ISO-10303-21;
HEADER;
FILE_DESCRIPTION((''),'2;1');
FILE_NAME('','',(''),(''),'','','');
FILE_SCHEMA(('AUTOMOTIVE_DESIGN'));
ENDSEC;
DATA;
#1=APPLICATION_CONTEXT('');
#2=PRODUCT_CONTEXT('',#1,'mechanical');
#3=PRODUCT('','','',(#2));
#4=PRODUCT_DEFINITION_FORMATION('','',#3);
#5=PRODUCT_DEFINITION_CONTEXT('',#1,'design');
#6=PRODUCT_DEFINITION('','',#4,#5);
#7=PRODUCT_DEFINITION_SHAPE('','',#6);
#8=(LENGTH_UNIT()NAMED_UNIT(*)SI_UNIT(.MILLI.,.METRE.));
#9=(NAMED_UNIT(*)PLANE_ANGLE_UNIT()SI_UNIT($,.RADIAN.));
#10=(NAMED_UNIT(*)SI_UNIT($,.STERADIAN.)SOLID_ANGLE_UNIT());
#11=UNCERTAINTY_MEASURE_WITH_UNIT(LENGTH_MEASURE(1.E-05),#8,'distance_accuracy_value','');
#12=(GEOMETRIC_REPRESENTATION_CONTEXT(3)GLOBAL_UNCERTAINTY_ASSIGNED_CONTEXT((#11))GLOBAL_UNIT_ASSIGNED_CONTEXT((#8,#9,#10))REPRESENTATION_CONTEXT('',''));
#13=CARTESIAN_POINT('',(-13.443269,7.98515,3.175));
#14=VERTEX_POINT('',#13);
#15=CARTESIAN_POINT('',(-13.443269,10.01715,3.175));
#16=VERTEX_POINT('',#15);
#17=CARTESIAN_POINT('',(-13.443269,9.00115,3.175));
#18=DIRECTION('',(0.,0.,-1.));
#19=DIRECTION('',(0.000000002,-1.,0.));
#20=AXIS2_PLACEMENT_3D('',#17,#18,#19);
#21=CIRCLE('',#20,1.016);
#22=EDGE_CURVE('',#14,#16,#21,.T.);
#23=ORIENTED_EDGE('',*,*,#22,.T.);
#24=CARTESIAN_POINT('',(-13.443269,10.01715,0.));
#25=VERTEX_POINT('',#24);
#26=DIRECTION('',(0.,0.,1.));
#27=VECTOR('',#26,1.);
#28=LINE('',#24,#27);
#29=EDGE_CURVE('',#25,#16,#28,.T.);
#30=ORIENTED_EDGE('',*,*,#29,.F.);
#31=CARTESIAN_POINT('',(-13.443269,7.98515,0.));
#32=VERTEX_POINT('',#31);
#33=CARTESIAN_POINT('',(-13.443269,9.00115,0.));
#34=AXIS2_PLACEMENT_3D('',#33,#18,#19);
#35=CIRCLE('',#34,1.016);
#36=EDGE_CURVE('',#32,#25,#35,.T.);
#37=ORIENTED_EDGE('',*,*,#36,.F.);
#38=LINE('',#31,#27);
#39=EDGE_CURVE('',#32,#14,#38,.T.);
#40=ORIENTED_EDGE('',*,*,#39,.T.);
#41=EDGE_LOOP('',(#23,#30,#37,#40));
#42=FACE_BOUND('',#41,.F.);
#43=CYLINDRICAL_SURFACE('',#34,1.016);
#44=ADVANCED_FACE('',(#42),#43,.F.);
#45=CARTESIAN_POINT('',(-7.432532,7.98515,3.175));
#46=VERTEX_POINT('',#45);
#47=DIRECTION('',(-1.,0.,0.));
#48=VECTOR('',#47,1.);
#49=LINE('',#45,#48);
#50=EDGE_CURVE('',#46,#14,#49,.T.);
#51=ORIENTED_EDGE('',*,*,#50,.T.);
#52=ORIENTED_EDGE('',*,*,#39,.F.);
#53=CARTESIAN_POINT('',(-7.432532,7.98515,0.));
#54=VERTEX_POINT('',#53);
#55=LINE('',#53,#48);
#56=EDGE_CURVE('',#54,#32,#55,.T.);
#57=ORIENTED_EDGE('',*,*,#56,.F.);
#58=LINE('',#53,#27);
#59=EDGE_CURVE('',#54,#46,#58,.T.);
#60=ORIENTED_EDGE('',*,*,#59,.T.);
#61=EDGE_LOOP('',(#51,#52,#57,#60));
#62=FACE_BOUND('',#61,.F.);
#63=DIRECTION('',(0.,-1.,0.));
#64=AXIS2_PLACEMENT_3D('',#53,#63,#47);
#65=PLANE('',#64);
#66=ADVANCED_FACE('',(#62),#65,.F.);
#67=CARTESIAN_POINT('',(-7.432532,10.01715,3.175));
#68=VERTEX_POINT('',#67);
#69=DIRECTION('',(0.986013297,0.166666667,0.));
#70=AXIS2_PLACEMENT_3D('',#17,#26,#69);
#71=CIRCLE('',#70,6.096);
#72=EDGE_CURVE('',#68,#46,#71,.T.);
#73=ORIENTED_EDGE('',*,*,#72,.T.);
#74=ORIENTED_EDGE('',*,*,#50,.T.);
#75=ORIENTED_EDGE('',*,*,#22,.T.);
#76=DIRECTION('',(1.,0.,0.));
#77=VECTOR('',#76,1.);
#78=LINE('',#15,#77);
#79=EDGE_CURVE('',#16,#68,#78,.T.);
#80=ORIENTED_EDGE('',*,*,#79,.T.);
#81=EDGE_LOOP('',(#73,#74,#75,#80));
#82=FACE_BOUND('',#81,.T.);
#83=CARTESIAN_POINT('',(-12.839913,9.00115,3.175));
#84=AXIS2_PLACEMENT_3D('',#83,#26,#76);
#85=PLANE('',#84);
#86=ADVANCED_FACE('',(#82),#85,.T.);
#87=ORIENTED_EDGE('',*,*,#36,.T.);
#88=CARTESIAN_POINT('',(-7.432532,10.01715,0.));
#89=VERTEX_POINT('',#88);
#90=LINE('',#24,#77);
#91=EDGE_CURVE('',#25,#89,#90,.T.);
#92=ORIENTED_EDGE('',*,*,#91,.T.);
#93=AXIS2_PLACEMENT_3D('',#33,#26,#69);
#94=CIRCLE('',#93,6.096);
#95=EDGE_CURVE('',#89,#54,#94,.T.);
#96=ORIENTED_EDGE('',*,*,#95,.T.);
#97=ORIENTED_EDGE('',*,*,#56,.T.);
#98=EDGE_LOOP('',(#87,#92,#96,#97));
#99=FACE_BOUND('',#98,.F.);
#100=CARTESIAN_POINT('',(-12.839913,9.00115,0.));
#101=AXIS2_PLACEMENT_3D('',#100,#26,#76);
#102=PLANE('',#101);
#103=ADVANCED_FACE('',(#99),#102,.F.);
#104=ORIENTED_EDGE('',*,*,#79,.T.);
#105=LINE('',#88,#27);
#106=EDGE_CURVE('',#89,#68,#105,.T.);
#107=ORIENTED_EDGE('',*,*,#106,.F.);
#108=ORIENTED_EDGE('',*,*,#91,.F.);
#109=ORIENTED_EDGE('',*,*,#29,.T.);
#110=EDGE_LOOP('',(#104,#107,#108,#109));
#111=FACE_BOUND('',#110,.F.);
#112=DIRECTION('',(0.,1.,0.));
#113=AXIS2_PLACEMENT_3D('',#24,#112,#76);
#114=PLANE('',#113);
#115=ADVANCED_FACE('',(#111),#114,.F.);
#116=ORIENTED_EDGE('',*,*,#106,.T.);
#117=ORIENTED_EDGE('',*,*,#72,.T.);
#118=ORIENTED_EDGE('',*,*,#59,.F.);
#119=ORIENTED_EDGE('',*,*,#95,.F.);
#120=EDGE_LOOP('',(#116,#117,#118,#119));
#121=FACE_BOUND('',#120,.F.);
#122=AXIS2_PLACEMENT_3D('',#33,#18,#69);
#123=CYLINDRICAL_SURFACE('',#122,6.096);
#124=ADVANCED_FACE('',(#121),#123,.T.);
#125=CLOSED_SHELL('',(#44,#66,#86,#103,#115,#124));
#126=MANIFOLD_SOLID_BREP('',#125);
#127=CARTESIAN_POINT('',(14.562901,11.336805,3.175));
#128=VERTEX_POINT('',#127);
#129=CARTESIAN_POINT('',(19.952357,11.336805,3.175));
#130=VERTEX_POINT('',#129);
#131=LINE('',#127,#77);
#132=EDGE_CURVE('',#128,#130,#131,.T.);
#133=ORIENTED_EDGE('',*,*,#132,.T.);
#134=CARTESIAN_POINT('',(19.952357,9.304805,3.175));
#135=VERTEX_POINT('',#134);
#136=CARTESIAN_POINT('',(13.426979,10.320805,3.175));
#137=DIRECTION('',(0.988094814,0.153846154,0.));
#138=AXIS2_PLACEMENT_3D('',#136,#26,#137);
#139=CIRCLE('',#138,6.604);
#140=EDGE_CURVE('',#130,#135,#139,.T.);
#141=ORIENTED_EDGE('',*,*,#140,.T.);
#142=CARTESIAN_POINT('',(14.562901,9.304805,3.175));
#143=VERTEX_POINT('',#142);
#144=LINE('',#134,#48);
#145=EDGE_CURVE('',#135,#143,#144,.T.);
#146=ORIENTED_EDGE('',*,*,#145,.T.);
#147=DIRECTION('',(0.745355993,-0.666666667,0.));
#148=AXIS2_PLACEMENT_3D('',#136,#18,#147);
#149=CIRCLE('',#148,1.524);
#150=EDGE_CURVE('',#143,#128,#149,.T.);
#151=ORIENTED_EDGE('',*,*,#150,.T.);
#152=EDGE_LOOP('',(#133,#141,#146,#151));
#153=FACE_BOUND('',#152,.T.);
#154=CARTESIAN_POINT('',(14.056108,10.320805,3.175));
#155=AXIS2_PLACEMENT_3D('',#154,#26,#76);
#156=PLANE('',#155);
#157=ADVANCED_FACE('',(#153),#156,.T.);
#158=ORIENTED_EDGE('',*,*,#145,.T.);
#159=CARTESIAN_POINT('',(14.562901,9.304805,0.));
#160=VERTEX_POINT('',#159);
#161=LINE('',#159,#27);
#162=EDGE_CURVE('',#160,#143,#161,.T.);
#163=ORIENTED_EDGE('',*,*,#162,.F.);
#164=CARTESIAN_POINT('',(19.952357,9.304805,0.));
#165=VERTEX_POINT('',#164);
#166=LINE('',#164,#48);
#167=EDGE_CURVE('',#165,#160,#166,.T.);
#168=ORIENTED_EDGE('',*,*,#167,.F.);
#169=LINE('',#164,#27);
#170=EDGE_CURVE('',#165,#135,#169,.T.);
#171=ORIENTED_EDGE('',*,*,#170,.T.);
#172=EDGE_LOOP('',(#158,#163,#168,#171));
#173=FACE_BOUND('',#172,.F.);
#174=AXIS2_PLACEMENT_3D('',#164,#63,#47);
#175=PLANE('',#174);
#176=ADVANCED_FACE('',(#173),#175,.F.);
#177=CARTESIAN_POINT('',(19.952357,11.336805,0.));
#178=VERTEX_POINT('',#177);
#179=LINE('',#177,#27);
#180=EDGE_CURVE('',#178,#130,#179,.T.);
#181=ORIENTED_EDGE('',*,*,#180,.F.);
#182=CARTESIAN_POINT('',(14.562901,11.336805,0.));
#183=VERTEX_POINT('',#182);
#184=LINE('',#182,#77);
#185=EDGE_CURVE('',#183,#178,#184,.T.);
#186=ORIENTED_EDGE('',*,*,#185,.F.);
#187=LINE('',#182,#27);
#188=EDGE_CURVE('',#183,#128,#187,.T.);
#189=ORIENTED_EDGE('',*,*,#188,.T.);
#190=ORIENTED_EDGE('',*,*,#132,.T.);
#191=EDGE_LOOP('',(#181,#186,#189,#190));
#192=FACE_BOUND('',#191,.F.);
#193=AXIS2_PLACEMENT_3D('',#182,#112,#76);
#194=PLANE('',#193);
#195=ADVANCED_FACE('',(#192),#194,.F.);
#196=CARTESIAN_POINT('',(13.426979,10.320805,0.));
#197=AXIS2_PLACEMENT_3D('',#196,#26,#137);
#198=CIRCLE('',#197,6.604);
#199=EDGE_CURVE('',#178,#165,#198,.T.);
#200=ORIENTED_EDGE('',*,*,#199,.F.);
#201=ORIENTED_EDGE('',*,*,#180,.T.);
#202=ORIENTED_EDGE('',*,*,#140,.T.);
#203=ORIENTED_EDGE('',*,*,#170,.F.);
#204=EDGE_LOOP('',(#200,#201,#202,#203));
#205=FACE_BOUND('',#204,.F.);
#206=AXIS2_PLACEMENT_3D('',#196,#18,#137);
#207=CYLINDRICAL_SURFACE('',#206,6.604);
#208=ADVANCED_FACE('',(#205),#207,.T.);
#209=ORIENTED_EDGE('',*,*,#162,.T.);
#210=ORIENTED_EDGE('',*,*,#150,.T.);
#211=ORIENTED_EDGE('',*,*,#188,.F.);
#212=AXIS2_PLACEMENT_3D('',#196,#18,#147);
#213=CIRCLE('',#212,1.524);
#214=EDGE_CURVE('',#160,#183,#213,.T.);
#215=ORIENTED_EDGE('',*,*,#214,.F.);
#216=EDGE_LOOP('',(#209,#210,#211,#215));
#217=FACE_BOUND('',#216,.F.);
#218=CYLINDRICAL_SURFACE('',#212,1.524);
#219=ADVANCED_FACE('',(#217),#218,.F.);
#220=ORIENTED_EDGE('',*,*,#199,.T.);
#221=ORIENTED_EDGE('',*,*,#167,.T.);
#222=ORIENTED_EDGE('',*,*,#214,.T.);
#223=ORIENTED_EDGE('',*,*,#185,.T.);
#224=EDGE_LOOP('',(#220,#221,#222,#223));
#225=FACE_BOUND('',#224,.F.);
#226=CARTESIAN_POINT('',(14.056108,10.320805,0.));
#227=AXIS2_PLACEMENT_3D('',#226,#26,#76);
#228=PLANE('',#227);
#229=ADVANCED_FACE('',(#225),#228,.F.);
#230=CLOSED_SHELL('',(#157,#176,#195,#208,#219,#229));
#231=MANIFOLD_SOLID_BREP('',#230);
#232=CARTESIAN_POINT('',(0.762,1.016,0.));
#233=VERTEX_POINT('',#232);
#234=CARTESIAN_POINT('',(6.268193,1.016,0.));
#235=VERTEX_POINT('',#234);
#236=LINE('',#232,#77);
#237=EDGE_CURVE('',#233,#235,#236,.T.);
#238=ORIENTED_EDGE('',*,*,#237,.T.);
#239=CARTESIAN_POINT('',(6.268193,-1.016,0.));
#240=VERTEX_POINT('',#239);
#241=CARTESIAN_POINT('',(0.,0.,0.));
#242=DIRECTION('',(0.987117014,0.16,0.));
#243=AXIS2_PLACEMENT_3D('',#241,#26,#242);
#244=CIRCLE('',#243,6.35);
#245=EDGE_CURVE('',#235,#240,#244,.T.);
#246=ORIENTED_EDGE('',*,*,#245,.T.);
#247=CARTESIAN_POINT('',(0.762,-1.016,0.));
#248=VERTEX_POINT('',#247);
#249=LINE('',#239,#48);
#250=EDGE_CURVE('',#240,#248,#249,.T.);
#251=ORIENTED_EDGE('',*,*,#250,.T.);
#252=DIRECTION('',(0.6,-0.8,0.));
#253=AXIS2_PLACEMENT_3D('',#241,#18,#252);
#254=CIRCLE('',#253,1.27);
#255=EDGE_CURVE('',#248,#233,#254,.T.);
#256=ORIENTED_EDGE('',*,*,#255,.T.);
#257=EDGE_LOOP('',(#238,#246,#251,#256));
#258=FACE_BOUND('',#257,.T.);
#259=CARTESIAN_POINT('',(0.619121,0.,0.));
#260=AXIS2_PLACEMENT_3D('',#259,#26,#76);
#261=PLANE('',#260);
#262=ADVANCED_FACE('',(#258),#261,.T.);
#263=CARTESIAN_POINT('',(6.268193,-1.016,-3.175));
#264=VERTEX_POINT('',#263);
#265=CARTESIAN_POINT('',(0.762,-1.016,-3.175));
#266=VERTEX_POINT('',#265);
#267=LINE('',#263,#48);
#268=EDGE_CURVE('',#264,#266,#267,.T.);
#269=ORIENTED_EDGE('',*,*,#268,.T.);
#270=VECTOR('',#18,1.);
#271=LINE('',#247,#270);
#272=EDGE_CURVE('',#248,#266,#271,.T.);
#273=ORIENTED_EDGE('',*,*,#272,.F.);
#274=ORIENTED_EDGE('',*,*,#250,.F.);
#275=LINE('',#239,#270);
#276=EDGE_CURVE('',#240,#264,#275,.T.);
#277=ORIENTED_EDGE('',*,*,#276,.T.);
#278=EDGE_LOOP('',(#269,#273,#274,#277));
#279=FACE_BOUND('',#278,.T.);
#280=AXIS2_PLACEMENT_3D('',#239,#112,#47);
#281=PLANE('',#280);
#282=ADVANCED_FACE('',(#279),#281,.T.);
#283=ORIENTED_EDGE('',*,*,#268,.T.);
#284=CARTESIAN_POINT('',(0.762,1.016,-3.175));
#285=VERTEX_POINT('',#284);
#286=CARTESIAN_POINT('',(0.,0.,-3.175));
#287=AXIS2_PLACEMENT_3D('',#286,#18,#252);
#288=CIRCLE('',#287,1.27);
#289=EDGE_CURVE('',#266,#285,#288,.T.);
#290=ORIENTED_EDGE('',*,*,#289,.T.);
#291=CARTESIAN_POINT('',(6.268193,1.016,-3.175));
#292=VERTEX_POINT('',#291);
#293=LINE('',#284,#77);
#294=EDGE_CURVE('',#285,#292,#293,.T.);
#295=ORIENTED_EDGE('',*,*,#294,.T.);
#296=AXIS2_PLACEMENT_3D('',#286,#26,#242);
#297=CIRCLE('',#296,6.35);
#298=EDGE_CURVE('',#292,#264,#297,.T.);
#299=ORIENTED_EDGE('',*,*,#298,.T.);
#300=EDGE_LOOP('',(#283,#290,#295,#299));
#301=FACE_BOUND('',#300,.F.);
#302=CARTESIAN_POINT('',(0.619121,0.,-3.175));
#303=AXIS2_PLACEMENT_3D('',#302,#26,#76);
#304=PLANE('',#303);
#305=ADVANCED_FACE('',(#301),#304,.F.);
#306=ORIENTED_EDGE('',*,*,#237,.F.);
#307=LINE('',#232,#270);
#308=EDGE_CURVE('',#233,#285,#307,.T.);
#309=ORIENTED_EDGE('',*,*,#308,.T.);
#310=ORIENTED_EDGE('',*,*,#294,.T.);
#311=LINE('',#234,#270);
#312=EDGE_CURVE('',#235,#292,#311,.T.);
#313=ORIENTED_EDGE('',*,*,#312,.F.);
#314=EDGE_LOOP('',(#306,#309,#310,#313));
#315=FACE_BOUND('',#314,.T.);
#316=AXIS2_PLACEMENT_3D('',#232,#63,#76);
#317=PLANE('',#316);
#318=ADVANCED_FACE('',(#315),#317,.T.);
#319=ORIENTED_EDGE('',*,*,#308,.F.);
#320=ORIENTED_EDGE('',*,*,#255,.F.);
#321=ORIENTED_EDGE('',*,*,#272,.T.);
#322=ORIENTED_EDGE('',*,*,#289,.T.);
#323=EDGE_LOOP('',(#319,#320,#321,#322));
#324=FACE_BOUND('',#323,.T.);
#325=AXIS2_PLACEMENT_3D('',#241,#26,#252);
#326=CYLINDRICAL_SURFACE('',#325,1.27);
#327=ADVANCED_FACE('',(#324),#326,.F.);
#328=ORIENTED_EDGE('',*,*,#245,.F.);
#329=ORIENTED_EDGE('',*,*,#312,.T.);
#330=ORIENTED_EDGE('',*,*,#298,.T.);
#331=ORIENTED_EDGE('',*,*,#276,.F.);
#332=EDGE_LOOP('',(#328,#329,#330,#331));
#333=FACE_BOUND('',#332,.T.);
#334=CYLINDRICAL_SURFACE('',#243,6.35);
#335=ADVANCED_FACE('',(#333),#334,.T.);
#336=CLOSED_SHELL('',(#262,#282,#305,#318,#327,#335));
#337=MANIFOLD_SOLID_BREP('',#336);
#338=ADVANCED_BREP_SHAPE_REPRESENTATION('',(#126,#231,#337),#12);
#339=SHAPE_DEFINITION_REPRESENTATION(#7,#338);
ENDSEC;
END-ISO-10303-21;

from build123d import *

# Parameters (mm, degrees)
F1_DEPTH = 3.175
F3_DEPTH = 3.175
F5_DEPTH = 3.175


# Not quite as in the source:
# - a length typed as a fraction of an inch, garbled in the dataset ("3 / 203.2 mm" for 3/8 in), is restored


with BuildPart() as f1:
    # F0 (on Top) → F1 (new body)
    with BuildSketch(Plane.XY):
        with BuildLine():
            ThreePointArc((0.762, -1.016), (-1.27, 0), (0.762, 1.016))
            Line((0.762, 1.016), (6.2681930411, 1.016))
            ThreePointArc((6.2681930411, 1.016), (-6.35, 0), (6.2681930411, -1.016))
            Line((6.2681930411, -1.016), (0.762, -1.016))
        make_face()
    extrude(amount=-F1_DEPTH)


with BuildPart() as f3:
    # F2 (on Top) → F3 (new body)
    with BuildSketch(Plane.XY):
        with BuildLine():
            ThreePointArc((14.5629012912, 9.3048050132), (11.9029787586, 10.3208050132), (14.5629012912, 11.3368050132))
            Line((14.5629012912, 11.3368050132), (19.9523569086, 11.3368050132))
            ThreePointArc((19.9523569086, 11.3368050132), (6.8229787586, 10.3208050132), (19.9523569086, 9.3048050132))
            Line((19.9523569086, 9.3048050132), (14.5629012912, 9.3048050132))
        make_face()
    extrude(amount=F3_DEPTH)


with BuildPart() as f5:
    # F4 (on Top) → F5 (new body)
    with BuildSketch(Plane.XY):
        with BuildLine():
            ThreePointArc((-13.4432689647, 7.9851497959), (-14.4592689667, 9.0011497959), (-13.4432689647, 10.0171497959))
            Line((-13.4432689647, 10.0171497959), (-7.4325319071, 10.0171497959))
            ThreePointArc((-7.4325319071, 10.0171497959), (-19.5392689667, 9.0011497959), (-7.4325319071, 7.9851497959))
            Line((-7.4325319071, 7.9851497959), (-13.4432689647, 7.9851497959))
        make_face()
    extrude(amount=F5_DEPTH)


solid = Compound([f1.part, f3.part, f5.part])
